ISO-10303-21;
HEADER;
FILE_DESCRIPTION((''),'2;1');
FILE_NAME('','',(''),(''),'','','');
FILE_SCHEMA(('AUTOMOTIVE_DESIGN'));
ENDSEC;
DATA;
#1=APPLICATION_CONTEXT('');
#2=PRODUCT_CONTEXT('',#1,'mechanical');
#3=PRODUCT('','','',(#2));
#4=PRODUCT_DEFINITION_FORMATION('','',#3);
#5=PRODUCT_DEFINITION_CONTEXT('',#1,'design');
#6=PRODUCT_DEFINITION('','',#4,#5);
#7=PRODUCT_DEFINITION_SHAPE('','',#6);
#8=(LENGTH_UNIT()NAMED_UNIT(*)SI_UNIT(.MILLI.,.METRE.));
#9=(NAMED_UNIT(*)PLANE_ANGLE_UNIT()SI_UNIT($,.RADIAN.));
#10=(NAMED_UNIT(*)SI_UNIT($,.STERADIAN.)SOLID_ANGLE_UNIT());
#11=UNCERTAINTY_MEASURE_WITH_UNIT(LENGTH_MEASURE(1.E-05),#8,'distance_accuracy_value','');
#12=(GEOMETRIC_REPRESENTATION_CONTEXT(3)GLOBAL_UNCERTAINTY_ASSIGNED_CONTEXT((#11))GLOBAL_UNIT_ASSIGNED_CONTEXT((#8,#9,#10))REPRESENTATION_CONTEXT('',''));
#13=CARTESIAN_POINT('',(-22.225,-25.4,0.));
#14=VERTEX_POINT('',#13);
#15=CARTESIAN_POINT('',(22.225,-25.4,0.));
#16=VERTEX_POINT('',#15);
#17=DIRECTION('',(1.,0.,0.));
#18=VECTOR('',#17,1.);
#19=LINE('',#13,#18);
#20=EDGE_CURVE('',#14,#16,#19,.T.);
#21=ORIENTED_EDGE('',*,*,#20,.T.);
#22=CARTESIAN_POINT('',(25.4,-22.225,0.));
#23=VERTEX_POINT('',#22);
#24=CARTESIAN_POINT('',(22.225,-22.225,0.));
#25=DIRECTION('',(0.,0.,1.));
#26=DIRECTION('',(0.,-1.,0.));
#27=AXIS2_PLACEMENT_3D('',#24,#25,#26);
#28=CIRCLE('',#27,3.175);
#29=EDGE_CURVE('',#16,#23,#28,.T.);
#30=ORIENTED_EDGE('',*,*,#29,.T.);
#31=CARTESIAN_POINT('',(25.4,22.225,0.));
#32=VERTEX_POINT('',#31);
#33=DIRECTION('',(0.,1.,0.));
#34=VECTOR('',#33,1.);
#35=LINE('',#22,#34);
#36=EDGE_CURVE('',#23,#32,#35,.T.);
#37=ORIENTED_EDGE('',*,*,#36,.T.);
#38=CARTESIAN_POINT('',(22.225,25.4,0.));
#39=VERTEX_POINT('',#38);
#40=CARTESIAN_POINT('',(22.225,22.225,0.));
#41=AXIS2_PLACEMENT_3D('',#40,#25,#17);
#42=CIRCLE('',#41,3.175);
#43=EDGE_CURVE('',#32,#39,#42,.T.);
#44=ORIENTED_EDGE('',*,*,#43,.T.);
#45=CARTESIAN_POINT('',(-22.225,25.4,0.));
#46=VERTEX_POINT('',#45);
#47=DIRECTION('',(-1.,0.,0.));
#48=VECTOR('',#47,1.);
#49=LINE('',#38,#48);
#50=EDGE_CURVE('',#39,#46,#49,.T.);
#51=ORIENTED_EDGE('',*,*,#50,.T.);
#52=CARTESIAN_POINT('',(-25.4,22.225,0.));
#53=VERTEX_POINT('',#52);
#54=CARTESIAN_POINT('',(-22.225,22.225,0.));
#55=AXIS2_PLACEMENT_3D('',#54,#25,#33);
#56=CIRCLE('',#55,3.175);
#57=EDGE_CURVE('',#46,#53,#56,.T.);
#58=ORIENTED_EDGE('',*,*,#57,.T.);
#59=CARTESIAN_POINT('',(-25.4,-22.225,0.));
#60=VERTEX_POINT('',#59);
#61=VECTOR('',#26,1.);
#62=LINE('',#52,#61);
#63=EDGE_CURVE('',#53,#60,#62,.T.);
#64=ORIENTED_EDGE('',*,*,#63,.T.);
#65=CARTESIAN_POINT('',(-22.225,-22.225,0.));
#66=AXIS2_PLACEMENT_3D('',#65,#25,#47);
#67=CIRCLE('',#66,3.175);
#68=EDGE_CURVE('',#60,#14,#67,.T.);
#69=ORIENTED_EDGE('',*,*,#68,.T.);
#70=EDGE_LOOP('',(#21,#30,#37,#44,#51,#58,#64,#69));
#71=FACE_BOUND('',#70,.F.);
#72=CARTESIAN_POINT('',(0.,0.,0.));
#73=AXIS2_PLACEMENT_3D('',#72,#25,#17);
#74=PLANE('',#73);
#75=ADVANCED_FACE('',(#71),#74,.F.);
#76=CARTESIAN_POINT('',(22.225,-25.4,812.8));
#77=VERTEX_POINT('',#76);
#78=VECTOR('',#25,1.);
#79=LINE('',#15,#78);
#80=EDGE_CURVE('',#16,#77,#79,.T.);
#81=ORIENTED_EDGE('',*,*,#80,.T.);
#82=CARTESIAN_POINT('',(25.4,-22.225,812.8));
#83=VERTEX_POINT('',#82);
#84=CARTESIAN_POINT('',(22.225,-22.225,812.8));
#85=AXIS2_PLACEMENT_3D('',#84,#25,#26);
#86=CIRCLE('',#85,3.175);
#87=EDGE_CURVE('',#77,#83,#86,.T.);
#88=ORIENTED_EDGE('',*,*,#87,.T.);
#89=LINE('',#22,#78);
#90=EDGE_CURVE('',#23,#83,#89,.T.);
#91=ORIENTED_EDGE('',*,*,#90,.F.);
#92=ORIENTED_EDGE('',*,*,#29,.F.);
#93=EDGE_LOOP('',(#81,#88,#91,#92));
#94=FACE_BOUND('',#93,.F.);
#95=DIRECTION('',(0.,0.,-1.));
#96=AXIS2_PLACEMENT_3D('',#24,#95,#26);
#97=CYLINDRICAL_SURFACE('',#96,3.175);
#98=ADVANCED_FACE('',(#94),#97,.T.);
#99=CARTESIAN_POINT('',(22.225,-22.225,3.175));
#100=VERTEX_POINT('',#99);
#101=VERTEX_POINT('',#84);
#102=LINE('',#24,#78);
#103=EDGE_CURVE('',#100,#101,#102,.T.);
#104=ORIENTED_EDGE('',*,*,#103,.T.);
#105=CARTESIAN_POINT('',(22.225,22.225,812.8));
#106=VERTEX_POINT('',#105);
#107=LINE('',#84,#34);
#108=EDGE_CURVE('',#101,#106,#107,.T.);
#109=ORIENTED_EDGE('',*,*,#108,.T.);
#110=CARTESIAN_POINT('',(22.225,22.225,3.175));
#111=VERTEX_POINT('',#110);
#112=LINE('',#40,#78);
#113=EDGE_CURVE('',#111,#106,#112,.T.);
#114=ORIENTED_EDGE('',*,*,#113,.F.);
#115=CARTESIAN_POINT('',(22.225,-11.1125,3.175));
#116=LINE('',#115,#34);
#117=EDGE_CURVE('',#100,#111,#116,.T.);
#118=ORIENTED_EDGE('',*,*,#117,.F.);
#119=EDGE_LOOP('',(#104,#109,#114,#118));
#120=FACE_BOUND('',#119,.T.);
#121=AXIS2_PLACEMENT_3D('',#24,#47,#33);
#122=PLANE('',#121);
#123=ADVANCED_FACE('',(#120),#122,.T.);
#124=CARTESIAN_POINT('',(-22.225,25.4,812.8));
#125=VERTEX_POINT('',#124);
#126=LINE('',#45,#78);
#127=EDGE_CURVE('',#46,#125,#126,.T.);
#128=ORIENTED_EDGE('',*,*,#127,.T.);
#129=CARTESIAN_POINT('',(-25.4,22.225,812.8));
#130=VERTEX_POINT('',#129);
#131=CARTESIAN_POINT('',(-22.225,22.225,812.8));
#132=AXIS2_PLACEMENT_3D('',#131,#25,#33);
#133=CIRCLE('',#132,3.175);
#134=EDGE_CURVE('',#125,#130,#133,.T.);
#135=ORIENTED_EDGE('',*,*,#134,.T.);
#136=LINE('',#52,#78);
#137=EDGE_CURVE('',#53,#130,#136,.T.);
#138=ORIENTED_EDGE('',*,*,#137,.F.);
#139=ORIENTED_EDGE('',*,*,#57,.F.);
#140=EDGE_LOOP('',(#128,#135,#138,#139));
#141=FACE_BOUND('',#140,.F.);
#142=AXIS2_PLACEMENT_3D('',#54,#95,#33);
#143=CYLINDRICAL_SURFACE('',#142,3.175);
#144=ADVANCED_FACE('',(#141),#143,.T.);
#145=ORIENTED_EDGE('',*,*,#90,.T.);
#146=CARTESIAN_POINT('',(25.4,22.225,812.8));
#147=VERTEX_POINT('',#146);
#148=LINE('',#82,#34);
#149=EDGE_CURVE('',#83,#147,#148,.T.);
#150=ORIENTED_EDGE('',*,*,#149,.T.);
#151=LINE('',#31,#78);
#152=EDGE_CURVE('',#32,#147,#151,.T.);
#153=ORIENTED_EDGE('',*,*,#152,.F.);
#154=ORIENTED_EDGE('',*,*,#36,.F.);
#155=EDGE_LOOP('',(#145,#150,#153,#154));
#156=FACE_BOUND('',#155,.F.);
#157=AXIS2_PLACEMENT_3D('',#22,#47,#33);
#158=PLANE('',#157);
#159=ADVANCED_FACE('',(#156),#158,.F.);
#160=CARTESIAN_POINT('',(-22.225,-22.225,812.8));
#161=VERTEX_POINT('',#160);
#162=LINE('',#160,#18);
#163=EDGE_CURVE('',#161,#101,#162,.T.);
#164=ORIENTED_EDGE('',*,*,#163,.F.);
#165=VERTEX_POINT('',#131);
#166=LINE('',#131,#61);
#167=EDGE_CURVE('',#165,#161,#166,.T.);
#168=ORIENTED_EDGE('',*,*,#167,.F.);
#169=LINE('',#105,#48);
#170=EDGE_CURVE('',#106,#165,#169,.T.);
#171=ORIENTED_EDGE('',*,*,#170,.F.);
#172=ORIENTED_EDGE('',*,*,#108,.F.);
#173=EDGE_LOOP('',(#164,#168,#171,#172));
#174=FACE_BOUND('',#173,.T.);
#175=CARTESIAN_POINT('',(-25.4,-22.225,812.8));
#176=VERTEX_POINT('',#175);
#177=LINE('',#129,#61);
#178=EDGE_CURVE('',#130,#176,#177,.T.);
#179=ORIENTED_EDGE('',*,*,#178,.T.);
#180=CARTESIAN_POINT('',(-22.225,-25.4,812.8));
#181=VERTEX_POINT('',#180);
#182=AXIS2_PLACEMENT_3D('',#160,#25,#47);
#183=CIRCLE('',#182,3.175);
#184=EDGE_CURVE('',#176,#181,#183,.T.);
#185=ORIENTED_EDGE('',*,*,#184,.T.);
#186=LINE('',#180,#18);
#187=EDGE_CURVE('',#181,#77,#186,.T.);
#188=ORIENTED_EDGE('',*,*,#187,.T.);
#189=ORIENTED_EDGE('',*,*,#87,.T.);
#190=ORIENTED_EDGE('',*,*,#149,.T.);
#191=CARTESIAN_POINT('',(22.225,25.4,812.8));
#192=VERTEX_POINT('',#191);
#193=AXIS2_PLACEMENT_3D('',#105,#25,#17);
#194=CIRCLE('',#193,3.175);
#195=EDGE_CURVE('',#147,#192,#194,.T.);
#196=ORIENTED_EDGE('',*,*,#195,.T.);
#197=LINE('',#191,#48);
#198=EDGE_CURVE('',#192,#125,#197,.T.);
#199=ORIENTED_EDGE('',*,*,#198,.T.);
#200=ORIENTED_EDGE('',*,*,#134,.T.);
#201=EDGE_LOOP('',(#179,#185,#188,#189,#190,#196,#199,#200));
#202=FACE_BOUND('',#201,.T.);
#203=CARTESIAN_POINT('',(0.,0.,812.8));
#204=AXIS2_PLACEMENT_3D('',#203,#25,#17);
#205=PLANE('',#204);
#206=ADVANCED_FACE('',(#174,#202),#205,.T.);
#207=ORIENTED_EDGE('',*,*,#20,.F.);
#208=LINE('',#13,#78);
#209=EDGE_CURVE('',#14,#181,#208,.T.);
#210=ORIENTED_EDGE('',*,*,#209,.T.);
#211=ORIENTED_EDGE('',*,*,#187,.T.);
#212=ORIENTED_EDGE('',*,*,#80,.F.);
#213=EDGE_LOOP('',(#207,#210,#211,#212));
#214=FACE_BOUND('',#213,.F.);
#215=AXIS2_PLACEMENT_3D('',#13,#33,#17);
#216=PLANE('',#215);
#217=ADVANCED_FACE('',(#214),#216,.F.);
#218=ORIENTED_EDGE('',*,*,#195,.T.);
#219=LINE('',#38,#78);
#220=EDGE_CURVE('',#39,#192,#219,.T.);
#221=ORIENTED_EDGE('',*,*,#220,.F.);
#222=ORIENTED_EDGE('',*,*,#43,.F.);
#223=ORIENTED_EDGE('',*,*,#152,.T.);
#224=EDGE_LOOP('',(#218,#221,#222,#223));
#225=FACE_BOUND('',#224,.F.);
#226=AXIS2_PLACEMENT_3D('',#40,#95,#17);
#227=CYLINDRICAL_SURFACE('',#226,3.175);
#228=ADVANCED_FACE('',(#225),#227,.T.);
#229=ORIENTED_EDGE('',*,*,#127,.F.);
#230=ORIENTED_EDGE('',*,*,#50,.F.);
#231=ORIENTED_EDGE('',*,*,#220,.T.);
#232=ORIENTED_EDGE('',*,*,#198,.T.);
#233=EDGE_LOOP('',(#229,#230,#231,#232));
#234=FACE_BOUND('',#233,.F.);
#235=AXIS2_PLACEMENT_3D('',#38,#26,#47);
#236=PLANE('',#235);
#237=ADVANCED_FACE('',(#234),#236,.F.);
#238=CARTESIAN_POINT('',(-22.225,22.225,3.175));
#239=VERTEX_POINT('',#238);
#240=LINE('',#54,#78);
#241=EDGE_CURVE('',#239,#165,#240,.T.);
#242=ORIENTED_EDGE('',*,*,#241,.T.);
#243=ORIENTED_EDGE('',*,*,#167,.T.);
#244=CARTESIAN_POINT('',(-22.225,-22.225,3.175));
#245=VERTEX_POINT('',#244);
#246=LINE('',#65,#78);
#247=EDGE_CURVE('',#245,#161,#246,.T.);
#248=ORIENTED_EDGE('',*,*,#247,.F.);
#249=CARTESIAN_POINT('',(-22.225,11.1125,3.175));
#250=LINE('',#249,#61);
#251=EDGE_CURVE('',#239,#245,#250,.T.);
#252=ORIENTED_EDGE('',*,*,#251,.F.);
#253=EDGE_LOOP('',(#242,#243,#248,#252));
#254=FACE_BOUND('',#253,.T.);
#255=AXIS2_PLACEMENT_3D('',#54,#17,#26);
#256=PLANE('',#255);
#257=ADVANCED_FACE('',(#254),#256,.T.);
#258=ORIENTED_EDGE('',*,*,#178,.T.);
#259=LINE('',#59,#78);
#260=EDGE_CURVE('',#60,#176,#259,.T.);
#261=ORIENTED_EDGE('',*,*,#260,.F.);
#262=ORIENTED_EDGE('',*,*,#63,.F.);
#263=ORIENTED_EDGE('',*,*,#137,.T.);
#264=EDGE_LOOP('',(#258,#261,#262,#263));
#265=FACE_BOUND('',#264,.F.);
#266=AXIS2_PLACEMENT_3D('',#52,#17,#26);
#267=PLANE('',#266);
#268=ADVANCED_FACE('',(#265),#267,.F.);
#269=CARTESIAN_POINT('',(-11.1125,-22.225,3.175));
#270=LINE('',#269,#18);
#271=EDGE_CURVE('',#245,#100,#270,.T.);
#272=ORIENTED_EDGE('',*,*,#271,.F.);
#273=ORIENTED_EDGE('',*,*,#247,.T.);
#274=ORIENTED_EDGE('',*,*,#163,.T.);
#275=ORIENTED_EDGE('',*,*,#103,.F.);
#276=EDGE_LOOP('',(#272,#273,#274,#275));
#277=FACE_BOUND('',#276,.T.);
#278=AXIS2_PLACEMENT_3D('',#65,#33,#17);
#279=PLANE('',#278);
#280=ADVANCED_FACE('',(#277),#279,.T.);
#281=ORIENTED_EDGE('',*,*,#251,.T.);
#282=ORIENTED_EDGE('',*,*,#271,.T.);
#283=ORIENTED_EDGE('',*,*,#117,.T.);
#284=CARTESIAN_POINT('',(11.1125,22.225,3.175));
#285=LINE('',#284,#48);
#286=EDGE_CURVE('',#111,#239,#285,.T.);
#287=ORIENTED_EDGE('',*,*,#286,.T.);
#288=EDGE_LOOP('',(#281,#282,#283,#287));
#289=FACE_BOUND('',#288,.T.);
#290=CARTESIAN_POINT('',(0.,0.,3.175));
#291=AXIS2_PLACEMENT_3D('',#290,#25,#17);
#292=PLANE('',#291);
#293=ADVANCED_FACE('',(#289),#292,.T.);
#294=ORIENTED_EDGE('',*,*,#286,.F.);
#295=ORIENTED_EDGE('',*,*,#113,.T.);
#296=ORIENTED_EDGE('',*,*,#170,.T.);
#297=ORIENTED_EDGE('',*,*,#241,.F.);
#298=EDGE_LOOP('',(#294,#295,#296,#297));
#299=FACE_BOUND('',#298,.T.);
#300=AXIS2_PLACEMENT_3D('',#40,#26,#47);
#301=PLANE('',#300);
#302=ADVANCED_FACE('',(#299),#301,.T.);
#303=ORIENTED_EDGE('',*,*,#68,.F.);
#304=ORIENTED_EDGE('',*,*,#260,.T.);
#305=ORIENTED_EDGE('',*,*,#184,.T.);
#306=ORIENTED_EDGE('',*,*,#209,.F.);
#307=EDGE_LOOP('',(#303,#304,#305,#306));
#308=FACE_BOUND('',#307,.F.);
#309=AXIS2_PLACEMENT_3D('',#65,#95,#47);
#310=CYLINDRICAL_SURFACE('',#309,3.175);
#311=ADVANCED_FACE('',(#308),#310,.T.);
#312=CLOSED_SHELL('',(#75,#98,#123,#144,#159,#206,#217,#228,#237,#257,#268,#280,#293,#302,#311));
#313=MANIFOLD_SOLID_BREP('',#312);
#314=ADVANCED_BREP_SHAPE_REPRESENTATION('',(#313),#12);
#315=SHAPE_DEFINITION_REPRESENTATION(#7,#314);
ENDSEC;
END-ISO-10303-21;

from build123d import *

# Parameters (mm, degrees)
F1_DEPTH = 812.8
F2_T     = 3.175


# Not quite as in the source:
# - a shell that OpenCascade refuses in one call is made with other operations: the cavity is built on its own and cut out


with BuildPart() as f1:
    # F0 (on Top) → F1 (new body)
    with BuildSketch(Plane.XY):
        with BuildLine():
            Line((22.225, 25.4), (-22.225, 25.4))
            ThreePointArc((-22.225, 25.4), (-24.4700640303, 24.4700640303), (-25.4, 22.225))
            Line((-25.4, 22.225), (-25.4, -22.225))
            ThreePointArc((-25.4, -22.225), (-24.4700640303, -24.4700640303), (-22.225, -25.4))
            Line((-22.225, -25.4), (22.225, -25.4))
            ThreePointArc((22.225, -25.4), (24.4700640303, -24.4700640303), (25.4, -22.225))
            Line((25.4, -22.225), (25.4, 22.225))
            ThreePointArc((25.4, 22.225), (24.4700640303, 24.4700640303), (22.225, 25.4))
        make_face()
    extrude(amount=F1_DEPTH)

    # F2: shell of thickness 3.175, made by hand


with BuildPart() as f2_core1:
    # F2_t2: copy of F1
    add(f1.part)

    # the walls: a layer under each face that stays
    f2_faces = [f2_core1.faces().sort_by_distance(p)[0] for p in [
        (0, 25.4, 406.4),
        (-25.4, 0, 406.4),
        (0, -25.4, 406.4),
        (25.4, 0, 406.4),
        (0, 0, 0),
    ]]
    thicken(f2_faces, amount=-F2_T, mode=Mode.SUBTRACT)


with BuildPart() as f1_1:
    add(f1.part)

    # what is left inside the walls is the cavity
    f2_cavity = [f2_core1.part.solids().sort_by_distance(p)[0] for p in [
        (0, 22.19325, 542.925),
    ]]
    add(f2_cavity, mode=Mode.SUBTRACT)


solid = f1_1.part
